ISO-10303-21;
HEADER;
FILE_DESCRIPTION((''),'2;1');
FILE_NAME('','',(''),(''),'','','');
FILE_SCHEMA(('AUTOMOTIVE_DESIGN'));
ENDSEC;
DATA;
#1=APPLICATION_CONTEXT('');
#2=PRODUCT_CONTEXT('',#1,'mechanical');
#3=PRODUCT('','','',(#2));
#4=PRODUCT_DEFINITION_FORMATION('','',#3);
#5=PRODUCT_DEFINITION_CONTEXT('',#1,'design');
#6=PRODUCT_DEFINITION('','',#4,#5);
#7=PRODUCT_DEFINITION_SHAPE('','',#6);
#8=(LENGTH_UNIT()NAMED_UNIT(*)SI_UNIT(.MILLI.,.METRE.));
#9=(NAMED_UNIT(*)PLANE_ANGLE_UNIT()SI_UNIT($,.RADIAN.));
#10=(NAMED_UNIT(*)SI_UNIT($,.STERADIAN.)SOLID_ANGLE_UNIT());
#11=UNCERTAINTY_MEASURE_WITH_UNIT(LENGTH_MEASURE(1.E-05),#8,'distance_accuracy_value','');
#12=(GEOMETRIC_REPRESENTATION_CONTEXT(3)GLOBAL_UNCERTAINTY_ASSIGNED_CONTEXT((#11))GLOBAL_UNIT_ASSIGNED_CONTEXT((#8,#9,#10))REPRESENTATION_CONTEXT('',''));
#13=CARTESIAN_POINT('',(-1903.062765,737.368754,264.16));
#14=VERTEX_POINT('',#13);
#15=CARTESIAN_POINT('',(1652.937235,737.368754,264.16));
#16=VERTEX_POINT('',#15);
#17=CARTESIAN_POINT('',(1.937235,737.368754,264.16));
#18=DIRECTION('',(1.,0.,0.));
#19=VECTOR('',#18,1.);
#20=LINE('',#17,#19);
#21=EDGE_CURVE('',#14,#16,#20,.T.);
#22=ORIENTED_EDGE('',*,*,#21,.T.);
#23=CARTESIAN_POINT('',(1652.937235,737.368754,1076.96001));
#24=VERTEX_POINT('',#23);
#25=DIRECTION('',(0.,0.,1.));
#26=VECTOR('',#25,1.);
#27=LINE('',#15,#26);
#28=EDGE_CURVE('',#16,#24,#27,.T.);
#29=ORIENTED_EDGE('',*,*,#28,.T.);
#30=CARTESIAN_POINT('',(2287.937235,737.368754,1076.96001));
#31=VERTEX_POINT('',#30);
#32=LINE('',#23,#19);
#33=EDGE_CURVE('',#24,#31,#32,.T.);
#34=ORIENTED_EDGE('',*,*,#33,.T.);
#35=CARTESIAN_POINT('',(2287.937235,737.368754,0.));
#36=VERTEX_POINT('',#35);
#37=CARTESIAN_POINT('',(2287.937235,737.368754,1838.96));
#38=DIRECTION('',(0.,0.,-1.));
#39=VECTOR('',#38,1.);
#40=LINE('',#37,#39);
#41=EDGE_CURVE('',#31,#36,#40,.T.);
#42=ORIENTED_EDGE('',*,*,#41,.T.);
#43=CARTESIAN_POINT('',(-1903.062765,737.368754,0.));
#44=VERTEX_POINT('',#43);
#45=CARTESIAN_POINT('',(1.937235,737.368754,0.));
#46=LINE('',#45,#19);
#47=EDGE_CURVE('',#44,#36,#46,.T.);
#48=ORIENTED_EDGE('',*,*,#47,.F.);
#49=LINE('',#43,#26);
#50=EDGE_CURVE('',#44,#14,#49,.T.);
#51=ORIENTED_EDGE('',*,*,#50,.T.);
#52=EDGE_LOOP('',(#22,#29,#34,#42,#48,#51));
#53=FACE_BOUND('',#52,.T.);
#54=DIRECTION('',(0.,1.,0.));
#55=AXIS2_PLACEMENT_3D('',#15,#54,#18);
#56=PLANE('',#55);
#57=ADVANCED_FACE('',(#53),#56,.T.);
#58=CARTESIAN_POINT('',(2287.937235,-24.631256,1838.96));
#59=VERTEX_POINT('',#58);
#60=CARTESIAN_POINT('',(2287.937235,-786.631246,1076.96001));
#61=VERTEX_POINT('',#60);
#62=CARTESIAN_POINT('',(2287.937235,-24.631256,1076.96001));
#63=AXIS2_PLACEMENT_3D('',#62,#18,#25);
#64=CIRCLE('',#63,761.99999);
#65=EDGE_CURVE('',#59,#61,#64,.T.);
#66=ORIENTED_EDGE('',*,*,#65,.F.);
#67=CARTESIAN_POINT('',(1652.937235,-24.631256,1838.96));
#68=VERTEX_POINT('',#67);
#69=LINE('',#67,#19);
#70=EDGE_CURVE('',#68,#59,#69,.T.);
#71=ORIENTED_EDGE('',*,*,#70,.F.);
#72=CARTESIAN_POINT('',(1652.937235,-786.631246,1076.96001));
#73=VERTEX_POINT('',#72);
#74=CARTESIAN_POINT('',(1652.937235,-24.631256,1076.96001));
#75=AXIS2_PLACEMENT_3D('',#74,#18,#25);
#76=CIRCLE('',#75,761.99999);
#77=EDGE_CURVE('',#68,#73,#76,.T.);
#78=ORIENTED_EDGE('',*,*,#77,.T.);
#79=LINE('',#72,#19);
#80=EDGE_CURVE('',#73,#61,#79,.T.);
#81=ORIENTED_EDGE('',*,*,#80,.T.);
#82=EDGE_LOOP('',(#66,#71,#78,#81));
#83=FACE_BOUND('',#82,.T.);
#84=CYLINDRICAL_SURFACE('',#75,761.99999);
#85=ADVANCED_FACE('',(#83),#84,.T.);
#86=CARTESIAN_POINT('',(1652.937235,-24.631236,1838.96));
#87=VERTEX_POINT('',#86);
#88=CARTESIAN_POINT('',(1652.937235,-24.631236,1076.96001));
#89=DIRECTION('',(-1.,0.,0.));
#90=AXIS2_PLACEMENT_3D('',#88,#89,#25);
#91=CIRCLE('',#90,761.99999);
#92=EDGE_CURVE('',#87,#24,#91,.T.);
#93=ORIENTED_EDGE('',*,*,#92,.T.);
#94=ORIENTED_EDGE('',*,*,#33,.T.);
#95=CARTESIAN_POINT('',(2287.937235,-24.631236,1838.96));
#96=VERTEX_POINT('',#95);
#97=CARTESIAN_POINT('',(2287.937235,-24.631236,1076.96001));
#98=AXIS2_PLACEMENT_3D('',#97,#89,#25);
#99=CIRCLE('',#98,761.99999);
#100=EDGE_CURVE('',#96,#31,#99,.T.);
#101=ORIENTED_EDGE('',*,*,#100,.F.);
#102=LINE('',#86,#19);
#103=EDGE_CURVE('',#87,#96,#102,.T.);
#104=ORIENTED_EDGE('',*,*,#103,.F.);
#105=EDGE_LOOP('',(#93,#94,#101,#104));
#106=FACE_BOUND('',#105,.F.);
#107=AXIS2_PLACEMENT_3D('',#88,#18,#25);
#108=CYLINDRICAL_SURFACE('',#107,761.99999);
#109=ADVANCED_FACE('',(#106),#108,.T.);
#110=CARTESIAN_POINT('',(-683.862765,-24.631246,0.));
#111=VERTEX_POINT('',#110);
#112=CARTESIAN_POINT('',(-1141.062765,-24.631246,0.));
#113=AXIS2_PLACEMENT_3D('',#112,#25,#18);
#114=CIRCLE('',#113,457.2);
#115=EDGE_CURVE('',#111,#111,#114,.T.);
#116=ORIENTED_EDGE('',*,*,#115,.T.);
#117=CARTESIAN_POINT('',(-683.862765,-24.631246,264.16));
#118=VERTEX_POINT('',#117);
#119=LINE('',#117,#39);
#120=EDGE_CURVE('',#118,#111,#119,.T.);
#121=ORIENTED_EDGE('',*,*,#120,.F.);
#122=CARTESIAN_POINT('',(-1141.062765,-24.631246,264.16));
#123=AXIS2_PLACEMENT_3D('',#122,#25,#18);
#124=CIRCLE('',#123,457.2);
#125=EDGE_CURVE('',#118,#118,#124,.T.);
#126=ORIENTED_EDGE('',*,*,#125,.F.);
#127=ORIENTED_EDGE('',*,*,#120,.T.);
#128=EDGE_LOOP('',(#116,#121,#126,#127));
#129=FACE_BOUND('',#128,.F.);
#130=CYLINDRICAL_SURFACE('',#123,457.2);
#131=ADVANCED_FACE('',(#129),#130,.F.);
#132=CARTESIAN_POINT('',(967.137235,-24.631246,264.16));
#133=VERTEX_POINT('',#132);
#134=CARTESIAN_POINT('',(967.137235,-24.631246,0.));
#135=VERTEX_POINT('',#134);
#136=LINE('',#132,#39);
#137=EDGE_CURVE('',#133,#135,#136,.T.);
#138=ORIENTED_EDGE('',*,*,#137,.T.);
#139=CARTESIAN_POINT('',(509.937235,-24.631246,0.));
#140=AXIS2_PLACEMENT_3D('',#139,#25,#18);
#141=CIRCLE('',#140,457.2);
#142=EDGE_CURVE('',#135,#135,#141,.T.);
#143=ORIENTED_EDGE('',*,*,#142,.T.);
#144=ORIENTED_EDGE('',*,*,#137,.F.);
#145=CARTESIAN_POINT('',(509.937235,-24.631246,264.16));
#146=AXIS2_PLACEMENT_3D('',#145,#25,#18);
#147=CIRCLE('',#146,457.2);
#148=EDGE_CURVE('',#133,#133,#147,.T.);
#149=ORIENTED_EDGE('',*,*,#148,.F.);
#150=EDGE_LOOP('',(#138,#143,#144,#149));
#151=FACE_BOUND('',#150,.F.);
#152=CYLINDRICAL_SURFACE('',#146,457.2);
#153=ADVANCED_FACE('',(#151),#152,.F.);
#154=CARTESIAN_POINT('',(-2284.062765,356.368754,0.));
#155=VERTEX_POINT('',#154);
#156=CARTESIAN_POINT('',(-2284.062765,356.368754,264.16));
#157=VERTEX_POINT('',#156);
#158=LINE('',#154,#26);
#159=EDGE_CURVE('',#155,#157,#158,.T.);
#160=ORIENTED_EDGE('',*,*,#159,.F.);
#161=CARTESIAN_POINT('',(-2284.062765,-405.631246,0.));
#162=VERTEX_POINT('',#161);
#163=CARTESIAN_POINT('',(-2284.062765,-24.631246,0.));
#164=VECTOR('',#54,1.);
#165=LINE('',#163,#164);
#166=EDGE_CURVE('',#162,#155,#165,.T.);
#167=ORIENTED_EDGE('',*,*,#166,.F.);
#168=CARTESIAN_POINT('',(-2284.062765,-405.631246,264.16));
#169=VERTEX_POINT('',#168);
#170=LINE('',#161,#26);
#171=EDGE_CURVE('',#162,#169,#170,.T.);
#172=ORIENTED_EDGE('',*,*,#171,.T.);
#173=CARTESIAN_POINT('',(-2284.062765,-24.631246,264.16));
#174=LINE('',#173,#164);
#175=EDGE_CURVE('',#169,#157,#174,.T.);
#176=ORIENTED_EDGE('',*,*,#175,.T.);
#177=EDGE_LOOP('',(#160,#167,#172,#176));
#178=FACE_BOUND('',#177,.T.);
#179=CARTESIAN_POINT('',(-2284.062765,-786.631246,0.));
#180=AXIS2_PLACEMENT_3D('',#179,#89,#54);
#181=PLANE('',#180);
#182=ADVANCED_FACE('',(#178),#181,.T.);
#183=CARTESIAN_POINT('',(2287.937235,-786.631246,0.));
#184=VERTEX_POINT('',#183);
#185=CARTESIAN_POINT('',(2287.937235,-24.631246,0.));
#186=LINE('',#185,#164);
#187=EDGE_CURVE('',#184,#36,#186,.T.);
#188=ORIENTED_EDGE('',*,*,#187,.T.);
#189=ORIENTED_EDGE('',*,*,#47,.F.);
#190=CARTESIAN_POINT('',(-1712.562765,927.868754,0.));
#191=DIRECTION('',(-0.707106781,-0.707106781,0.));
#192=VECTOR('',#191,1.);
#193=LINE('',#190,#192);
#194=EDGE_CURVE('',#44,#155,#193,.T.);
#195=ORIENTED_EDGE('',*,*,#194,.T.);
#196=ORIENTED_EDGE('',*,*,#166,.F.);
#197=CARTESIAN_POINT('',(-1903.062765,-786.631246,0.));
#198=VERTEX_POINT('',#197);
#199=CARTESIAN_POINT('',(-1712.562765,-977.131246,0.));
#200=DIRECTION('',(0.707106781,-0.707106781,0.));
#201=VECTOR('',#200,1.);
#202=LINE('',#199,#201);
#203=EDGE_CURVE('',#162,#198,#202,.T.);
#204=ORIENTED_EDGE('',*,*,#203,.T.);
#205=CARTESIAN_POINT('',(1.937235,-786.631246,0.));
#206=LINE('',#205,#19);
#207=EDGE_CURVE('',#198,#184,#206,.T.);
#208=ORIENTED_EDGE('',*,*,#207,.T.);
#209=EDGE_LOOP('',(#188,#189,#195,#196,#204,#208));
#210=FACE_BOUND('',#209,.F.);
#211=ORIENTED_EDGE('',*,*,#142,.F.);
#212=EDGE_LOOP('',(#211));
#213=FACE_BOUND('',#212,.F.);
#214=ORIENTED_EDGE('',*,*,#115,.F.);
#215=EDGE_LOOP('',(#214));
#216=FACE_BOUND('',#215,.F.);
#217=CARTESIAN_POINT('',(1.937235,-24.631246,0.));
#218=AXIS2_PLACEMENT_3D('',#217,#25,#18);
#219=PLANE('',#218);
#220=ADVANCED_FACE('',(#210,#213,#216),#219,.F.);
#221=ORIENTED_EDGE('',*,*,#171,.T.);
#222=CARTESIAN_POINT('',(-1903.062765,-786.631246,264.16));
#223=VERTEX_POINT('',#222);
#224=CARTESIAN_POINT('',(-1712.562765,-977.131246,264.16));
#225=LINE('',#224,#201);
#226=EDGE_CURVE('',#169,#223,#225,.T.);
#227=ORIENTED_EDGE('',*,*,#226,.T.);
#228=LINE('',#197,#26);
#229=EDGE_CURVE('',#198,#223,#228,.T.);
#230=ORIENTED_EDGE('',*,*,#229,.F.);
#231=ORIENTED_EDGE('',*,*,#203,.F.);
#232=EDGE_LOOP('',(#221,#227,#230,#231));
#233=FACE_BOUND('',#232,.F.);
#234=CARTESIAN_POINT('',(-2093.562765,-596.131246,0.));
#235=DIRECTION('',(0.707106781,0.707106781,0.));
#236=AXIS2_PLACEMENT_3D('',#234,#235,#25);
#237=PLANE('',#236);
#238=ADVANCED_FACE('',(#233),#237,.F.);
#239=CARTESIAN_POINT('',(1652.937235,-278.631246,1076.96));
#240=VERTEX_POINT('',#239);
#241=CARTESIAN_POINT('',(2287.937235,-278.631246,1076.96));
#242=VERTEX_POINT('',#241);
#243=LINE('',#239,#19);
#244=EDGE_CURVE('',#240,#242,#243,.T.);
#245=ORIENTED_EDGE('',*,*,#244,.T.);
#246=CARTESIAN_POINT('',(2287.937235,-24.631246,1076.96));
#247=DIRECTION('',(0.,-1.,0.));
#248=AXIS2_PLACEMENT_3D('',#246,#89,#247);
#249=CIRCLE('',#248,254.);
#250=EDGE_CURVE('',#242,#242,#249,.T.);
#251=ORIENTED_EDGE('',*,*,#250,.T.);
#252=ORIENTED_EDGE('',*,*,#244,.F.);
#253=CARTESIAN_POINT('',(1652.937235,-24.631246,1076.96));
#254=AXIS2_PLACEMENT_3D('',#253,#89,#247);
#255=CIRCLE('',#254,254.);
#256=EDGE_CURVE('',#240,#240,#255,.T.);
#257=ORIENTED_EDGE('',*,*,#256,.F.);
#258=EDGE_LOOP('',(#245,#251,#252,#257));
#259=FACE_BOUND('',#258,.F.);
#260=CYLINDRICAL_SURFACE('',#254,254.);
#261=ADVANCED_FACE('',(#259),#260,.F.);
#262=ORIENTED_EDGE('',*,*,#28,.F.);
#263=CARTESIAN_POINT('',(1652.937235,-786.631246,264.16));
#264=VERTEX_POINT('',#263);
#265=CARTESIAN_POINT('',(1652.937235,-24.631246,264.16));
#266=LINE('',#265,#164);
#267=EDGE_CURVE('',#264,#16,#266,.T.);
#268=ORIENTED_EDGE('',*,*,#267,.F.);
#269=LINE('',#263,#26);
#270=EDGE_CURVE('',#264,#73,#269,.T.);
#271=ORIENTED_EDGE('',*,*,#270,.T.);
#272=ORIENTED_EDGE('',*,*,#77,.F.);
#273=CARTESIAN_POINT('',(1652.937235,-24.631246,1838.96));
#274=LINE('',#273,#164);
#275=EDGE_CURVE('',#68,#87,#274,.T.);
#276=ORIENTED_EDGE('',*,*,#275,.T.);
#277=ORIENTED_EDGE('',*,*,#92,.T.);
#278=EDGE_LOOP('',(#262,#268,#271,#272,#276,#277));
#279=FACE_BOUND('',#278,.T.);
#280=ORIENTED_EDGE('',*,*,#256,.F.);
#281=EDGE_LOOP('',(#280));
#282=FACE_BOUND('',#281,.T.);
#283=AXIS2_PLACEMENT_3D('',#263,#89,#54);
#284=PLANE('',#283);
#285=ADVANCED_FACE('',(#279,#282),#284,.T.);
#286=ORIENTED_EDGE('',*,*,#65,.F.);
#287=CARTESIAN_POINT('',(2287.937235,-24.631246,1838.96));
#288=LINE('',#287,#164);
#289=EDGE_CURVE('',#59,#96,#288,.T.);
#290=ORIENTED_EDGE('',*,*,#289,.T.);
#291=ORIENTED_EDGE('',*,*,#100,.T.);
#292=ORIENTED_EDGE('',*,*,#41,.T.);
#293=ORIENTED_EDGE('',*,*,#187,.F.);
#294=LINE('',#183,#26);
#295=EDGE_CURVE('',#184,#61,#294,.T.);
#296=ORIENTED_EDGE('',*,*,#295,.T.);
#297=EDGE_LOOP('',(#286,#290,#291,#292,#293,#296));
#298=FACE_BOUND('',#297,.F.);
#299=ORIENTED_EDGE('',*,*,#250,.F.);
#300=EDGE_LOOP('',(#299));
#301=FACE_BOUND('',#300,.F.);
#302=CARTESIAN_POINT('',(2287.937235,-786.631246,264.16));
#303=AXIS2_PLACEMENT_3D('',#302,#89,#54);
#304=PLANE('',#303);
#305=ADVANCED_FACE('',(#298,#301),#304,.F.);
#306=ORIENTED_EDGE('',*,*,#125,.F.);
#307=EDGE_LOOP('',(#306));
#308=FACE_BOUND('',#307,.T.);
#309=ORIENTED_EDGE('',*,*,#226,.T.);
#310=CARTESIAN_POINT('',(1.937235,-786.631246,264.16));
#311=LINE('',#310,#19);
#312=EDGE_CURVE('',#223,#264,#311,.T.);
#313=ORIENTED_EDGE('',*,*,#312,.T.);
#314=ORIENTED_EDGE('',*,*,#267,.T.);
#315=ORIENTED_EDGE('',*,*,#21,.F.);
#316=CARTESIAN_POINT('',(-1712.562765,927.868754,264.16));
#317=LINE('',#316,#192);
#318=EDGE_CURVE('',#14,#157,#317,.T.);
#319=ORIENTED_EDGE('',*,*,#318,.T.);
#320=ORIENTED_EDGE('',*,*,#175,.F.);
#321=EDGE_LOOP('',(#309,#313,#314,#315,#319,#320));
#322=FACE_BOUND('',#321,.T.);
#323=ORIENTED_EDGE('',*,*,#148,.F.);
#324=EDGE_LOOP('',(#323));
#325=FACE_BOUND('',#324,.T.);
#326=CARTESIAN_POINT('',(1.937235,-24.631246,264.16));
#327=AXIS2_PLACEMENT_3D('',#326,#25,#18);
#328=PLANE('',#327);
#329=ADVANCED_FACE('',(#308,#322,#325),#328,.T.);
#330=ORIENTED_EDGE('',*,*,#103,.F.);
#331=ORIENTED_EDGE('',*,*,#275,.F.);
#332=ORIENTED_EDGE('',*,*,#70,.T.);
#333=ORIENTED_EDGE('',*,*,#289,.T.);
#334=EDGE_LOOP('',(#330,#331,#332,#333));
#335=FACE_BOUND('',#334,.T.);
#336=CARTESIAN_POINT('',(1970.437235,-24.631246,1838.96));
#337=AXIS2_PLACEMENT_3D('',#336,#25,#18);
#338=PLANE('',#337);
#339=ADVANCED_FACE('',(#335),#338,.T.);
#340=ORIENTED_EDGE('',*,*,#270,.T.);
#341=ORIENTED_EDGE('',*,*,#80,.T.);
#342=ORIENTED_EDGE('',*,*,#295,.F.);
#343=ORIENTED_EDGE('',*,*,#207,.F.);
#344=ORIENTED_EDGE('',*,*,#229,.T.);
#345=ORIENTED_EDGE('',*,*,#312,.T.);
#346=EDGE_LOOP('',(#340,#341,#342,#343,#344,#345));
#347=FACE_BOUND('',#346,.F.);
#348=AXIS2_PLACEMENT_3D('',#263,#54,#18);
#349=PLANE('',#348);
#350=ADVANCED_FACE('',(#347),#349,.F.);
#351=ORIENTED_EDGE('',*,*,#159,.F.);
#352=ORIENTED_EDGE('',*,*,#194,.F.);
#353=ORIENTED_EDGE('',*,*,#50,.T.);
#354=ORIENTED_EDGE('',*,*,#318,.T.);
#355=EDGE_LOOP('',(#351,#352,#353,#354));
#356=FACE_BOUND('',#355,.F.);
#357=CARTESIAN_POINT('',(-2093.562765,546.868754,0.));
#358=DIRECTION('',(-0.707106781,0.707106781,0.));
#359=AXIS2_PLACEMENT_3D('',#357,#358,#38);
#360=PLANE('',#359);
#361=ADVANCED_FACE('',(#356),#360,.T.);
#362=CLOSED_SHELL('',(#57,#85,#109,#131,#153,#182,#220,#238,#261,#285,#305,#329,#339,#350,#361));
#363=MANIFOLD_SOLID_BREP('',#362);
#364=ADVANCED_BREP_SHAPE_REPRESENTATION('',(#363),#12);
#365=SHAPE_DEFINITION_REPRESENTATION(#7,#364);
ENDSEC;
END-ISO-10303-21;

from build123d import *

# Parameters (mm, degrees)
F0_W     = 4572
F0_H     = 1524
F1_DEPTH = 264.16
F2_W     = 635
F2_H     = 1524
F3_DEPTH = 1574.8
F4_R     = 761.99999
F5_R     = 457.2
F6_DEPTH = 1475.74
F7_R     = 254
F8_DEPTH = 863.6
F9_SIZE  = 381
F10_SIZE = 381


# Not quite as in the source:
# - a fillet or chamfer is up to 0.001 mm smaller than in the source, because OpenCascade refuses the exact size


with BuildPart() as f1:
    # F0 (on Top) → F1 (new body)
    with BuildSketch(Plane.XY):
        with Locations((1.9372347742, -24.6312463946)):
            Rectangle(F0_W, F0_H)
    extrude(amount=F1_DEPTH)

    # F2 (on face) → F3 (join)
    with BuildSketch(Plane.XY.offset(264.16)):
        with Locations((1970.4372347742, -24.6312463946)):
            Rectangle(F2_W, F2_H)
    extrude(amount=F3_DEPTH)

    # F4 (radius 762 in the source; OpenCascade refuses exactly that, so slightly less here)
    f4_edges = [f1.edges().sort_by_distance(p)[0] for p in [
        (1970.437235, 737.368754, 1838.96),
        (1970.437235, -786.631246, 1838.96),
    ]]
    fillet(f4_edges, radius=F4_R)

    # F5 (on face) → F6 (cut)
    with BuildSketch(Plane.XY.offset(264.16)):
        with Locations((509.9372347742, -24.6312463946)):
            Circle(F5_R)
        with Locations((-1141.0627652258, -24.6312463946)):
            Circle(F5_R)
    extrude(amount=-F6_DEPTH, mode=Mode.SUBTRACT)

    # F7 (on face) → F8 (cut)
    with BuildSketch(Plane(origin=(1652.9372347742, 0, 0), x_dir=(0, -1, 0), z_dir=(-1, 0, 0))):
        with Locations((24.6312463946, 1076.96)):
            Circle(F7_R)
    extrude(amount=-F8_DEPTH, mode=Mode.SUBTRACT)

    # F9
    f9_edges = [f1.edges().sort_by_distance(p)[0] for p in [
        (-2284.062765, 737.368754, 132.08),
    ]]
    chamfer(f9_edges, length=F9_SIZE)

    # F10
    f10_edges = [f1.edges().sort_by_distance(p)[0] for p in [
        (-2284.062765, -786.631246, 132.08),
    ]]
    chamfer(f10_edges, length=F10_SIZE)


solid = f1.part
